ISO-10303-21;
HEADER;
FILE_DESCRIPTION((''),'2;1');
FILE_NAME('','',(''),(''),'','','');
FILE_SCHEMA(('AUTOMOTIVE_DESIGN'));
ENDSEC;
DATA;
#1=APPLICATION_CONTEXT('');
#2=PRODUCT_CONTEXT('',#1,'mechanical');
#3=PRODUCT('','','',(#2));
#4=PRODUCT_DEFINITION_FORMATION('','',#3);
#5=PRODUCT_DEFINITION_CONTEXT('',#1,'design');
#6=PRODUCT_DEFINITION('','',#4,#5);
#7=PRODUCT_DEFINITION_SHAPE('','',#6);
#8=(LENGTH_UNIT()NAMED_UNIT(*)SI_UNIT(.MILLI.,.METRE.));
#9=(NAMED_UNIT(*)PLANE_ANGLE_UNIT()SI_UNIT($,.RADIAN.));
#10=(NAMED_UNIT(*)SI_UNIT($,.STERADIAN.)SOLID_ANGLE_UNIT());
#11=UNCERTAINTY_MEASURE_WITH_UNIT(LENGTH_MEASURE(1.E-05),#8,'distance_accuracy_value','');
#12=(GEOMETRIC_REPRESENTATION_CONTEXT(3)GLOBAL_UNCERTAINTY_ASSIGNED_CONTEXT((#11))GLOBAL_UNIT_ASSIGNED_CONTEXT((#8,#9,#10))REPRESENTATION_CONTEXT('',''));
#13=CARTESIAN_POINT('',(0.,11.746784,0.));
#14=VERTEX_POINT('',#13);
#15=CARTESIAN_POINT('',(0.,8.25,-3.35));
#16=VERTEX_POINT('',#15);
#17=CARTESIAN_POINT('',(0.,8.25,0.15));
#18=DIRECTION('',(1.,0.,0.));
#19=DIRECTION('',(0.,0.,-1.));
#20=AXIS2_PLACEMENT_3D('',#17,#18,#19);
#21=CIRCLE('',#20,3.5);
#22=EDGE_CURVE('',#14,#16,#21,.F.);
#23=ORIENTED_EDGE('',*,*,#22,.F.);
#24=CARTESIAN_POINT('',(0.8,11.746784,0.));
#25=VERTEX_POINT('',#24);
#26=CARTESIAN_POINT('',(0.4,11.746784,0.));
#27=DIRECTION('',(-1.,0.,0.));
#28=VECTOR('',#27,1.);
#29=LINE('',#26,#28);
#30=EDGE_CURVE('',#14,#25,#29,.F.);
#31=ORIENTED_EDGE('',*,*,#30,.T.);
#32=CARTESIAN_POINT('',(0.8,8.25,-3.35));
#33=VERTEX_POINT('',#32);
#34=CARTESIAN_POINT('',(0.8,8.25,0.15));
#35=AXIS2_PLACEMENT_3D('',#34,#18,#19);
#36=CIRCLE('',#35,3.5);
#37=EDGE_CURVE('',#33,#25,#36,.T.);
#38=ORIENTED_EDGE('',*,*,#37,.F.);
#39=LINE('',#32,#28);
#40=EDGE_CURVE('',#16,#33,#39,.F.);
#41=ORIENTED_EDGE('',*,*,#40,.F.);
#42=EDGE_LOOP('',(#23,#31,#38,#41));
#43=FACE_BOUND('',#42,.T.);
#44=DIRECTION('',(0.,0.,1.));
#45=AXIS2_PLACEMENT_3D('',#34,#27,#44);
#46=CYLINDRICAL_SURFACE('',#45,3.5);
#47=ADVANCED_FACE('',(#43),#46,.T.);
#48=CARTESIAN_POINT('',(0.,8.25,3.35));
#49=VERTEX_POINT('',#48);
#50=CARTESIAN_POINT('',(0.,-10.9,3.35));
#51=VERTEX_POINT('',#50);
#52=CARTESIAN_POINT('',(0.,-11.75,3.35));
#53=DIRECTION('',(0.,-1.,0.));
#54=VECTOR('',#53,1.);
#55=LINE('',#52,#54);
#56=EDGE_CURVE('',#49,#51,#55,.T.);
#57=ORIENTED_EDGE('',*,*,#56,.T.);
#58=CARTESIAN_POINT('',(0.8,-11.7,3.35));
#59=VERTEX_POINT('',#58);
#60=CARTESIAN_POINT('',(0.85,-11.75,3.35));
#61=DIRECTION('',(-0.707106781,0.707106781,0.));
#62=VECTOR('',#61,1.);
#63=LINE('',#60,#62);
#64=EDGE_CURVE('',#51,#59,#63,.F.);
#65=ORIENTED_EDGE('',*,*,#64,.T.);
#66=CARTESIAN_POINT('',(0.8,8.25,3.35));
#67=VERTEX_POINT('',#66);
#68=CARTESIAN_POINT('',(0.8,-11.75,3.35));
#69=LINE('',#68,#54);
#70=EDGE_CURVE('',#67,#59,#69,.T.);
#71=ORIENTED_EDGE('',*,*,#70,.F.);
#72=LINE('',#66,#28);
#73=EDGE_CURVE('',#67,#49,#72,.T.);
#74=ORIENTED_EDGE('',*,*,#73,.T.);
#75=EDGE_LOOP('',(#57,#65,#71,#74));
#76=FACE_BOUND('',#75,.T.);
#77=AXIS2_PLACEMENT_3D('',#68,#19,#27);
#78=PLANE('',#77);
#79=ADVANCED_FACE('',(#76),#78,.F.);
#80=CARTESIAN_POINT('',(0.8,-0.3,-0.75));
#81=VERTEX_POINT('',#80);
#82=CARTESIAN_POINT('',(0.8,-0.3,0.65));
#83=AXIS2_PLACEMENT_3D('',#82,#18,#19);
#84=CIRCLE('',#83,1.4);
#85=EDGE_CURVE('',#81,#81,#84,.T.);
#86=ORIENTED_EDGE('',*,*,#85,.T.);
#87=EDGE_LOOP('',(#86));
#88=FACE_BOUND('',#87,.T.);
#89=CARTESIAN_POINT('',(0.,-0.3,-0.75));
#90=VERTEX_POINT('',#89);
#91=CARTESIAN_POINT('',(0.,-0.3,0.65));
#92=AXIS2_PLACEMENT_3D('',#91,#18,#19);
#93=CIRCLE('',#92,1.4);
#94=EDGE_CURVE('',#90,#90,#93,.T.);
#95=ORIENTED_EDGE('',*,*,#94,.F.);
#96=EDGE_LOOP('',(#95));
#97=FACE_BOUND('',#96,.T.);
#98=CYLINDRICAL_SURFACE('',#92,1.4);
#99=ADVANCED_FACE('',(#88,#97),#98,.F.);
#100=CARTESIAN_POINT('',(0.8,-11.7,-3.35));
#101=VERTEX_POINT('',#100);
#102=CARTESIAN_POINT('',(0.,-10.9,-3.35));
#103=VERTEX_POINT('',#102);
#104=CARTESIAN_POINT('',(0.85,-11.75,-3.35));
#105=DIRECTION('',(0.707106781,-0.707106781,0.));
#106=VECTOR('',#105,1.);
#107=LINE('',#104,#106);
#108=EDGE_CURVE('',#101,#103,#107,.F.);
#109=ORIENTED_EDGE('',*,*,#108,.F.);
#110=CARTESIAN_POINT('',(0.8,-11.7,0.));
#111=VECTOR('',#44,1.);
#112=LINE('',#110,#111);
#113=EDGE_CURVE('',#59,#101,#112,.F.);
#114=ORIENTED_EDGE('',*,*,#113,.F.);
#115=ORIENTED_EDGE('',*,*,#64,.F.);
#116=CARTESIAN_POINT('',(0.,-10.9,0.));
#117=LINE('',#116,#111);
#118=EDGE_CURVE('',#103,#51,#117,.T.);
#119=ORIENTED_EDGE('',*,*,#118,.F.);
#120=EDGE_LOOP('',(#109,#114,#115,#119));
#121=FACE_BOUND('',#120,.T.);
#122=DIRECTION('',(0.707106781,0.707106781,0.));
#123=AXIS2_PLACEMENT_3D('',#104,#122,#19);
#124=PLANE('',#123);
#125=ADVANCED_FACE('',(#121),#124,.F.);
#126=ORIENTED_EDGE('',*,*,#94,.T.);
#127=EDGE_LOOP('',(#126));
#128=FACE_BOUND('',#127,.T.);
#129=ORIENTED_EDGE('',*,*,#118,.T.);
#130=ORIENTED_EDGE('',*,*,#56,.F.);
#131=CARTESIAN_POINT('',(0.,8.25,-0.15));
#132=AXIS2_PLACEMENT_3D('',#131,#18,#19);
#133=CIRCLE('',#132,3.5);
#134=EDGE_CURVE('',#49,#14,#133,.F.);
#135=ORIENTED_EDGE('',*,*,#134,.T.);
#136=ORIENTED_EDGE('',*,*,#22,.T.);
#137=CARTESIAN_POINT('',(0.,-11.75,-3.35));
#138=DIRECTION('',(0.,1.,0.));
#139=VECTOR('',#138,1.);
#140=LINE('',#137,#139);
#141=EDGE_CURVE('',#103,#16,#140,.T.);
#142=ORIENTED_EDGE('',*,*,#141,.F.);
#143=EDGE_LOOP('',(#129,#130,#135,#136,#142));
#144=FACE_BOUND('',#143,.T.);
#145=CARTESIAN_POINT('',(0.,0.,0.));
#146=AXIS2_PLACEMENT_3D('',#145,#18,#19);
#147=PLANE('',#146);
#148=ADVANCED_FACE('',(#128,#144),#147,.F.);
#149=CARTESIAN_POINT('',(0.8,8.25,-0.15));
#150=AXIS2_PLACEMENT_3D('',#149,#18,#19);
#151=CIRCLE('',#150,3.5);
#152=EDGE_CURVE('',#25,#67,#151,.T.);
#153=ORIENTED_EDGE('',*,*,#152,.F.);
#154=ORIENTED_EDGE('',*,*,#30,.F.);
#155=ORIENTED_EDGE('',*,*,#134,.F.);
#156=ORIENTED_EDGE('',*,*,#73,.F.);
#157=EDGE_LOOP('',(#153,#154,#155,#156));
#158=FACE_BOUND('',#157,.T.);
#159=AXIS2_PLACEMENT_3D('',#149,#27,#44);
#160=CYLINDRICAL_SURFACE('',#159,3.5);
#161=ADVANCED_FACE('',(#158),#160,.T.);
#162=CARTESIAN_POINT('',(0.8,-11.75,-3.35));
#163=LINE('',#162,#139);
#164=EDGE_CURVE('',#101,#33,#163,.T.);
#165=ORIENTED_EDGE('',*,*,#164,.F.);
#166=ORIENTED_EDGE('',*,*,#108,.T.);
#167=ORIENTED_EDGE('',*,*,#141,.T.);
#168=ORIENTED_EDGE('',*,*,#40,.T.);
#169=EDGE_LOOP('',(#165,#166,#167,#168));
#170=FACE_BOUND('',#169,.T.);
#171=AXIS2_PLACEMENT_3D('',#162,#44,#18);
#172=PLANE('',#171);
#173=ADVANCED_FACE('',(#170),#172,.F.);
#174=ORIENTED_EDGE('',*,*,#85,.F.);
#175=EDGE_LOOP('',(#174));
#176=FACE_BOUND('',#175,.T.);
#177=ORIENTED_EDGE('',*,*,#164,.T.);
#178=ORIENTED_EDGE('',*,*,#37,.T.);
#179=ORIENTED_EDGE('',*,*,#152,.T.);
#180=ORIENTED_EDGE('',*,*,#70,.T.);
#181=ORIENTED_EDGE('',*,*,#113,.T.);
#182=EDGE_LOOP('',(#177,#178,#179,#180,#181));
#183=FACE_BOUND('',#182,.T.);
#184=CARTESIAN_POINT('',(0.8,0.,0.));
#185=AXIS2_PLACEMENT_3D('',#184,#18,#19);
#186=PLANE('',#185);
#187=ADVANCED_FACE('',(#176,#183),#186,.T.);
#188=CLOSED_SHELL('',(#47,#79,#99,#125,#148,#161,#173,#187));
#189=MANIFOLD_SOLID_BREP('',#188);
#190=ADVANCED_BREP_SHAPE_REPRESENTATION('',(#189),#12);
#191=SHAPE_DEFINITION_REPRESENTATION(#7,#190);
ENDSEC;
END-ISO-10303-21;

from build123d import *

# Parameters (mm, degrees)
SKETCH2_W           = 6.7
SKETCH2_H           = 23.5
BOSS_EXTRUDE2_DEPTH = 0.8
CHAMFER1_SIZE       = 0.85
FILLET2_R           = 3.5
SKETCH6_R           = 1.4
CUT_EXTRUDE1_DEPTH  = 0.8


with BuildPart() as part:
    # Sketch2 → Boss-Extrude2 (new body)
    with BuildSketch(Plane(origin=(0, 0, 0), x_dir=(0, 0, -1), z_dir=(1, 0, 0))):
        Rectangle(SKETCH2_W, SKETCH2_H)
    extrude(amount=BOSS_EXTRUDE2_DEPTH)

    # Chamfer1
    # the kernel refuses this chamfer: 0.85 mm, written as the material it takes off along each edge
    with BuildSketch(Plane(origin=(0, -11.75, -5.53593054), x_dir=(0.9996219169112968, -0.02749587661058583, 0), z_dir=(0, 0, 1))) as chamfer1_piece_1:
        Polygon((CHAMFER1_SIZE * 0.999621916911, CHAMFER1_SIZE * 0.0274958766106), (-CHAMFER1_SIZE * 0.0274958766106, CHAMFER1_SIZE * 0.999621916911), (0, 0), align=None)
    extrude(amount=11.07186108, mode=Mode.SUBTRACT)

    # Fillet2
    # the kernel refuses this fillet: 3.5 mm, written as the material it takes off along each edge
    with BuildSketch(Plane(origin=(-8.75, 11.75, -3.35), x_dir=(0, -1, 0), z_dir=(1, 0, 0)), Plane(origin=(-8.75, 11.75, 3.35), x_dir=(0, 0, -1), z_dir=(1, 0, 0))) as fillet2_piece_1:
        with BuildLine():
            CenterArc((FILLET2_R, -FILLET2_R), FILLET2_R, 90, 90)
            Line((0, -FILLET2_R), (0, 0))
            Line((0, 0), (FILLET2_R, 0))
        make_face()
    extrude(amount=18.3, mode=Mode.SUBTRACT)

    # Sketch6 → Cut-Extrude1 (cut)
    with BuildSketch(Plane(origin=(0.8, 0, 0), x_dir=(0, 0, -1), z_dir=(1, 0, 0))):
        with Locations((-0.65, -0.3)):
            Circle(SKETCH6_R)
    extrude(amount=-CUT_EXTRUDE1_DEPTH, mode=Mode.SUBTRACT)


solid = part.part
